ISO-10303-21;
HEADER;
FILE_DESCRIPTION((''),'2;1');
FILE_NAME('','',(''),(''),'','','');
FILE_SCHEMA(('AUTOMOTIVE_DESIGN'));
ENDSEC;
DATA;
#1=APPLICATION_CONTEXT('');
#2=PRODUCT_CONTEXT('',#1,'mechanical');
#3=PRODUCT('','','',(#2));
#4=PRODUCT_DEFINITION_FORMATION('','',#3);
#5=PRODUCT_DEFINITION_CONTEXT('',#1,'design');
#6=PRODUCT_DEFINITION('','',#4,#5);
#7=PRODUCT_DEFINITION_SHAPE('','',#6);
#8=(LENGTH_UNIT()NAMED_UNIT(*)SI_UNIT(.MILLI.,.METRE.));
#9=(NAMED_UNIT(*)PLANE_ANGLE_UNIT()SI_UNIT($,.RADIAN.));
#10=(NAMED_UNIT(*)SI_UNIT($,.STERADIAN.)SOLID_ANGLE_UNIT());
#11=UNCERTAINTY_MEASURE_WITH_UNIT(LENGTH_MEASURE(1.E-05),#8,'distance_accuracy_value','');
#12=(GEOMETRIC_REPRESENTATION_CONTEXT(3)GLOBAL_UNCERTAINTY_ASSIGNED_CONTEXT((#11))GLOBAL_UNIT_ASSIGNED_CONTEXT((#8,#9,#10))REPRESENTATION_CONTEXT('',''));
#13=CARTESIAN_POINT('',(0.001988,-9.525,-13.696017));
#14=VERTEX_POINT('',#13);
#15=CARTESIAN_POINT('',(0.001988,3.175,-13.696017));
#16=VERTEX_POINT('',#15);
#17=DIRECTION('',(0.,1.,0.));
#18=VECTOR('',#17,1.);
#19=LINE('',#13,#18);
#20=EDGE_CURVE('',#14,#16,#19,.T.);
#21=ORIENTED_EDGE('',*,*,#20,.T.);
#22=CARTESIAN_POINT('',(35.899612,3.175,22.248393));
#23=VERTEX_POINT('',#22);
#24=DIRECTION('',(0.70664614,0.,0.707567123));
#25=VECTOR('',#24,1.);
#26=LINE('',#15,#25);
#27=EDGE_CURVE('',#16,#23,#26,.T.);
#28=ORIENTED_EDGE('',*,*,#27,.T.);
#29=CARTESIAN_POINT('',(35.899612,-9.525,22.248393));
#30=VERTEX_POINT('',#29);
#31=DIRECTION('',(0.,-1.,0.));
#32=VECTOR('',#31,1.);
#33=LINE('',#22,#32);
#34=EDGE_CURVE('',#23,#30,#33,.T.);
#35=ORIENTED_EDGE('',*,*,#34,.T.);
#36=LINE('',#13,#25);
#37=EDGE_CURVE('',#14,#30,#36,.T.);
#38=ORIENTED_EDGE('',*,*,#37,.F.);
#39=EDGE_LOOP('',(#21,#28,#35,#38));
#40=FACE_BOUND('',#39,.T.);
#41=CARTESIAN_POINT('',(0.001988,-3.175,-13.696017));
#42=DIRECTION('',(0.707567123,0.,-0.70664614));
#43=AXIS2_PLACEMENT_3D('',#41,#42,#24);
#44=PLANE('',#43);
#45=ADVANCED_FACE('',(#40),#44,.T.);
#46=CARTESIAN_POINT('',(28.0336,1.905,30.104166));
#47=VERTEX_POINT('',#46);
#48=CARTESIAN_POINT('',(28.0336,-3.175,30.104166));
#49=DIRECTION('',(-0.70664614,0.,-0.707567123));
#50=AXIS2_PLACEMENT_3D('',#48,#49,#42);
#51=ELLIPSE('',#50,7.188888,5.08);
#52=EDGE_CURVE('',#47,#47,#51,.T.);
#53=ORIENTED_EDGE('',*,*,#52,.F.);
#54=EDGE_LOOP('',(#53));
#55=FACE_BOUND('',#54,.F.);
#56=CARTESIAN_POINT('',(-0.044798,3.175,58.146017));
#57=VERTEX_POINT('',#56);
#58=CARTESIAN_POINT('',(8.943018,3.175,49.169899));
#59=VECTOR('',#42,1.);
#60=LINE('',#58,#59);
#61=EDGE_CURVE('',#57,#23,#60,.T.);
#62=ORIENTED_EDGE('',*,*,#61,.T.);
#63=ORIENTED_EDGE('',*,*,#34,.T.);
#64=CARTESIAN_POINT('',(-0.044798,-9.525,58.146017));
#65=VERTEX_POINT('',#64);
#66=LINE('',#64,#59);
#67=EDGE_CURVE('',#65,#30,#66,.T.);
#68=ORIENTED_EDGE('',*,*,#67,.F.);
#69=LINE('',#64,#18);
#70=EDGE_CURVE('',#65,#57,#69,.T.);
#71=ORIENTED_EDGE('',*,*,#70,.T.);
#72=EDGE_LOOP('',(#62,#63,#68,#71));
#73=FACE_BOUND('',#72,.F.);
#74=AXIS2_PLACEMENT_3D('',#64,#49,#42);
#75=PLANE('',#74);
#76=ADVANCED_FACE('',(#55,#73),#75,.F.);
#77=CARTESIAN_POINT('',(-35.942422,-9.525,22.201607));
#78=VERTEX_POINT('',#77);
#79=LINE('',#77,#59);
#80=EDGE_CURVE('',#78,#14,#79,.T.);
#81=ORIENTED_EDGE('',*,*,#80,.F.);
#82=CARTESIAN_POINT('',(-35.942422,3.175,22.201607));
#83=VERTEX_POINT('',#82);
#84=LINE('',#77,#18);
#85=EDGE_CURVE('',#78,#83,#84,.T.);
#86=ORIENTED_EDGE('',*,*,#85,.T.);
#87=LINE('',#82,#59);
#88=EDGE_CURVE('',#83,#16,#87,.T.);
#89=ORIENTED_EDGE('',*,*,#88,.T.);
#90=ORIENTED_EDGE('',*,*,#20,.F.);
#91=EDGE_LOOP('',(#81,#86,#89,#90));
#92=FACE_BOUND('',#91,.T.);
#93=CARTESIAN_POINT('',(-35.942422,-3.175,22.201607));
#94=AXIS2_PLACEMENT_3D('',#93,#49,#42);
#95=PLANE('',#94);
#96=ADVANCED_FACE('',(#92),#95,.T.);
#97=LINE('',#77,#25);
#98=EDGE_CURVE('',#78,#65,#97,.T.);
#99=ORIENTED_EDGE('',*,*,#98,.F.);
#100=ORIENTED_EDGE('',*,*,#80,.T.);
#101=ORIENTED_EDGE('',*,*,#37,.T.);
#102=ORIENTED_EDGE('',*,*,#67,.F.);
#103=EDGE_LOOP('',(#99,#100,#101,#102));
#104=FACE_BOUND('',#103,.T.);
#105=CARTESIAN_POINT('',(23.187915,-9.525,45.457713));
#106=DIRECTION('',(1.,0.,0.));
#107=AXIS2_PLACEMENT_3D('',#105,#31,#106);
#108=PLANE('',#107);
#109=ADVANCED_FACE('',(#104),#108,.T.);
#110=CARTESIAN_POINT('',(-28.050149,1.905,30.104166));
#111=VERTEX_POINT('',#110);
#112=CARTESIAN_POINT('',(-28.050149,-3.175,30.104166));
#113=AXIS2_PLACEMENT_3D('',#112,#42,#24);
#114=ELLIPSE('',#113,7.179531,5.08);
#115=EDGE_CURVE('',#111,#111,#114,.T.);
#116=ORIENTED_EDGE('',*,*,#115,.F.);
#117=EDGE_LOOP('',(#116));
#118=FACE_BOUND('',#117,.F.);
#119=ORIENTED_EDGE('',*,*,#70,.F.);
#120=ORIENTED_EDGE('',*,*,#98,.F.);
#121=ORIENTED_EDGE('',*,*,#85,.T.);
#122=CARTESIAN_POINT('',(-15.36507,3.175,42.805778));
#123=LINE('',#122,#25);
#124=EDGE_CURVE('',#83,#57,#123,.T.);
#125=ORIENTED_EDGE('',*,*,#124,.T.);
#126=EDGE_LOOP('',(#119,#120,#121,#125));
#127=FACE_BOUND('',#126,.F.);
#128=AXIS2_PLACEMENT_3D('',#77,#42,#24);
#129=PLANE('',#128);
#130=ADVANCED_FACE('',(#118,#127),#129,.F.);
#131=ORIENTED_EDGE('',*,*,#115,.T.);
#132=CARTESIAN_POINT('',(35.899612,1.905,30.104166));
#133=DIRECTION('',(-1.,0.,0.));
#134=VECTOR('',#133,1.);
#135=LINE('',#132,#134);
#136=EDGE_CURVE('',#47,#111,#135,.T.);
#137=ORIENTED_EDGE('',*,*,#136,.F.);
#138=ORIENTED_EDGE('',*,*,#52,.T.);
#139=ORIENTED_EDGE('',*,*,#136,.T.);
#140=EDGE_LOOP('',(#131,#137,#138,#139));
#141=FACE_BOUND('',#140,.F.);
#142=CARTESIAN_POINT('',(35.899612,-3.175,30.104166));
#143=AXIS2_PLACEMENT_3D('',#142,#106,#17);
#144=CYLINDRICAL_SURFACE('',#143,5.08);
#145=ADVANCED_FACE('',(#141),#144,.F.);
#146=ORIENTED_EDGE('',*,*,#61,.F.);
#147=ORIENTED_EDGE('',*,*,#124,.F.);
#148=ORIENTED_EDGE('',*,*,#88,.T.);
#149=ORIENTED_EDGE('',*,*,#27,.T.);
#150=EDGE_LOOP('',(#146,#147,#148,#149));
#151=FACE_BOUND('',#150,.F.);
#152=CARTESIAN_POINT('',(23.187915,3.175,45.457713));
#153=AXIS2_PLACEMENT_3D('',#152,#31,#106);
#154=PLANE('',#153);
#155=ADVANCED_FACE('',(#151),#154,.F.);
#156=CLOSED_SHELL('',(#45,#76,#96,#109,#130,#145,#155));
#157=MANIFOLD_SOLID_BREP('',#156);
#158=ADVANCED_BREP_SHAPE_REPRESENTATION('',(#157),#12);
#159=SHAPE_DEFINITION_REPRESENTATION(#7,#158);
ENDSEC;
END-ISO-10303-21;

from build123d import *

# Parameters (mm, degrees)
F0_W      = 203.2
F0_H      = 44.45
F1_DEPTH  = 3.175
F3_DEPTH  = 6.35
F5_DEPTH  = 25.4
F6_DEPTH  = 25.4
F8_DEPTH  = 12.7
F9_R      = 5.08
F10_DEPTH = 76.2
F12_DEPTH = 25.4


with BuildPart() as f1:
    # F0 (on Front) → F1 (new body, symmetric)
    with BuildSketch(Plane.XZ):
        with Locations((2.1883048997, 22.225)):
            Rectangle(F0_W, F0_H)
    extrude(amount=F1_DEPTH, both=True)

    # F2 (on face) → F3 (join, symmetric)
    with BuildSketch(Plane.XZ.offset(3.175)):
        Polygon((2.2116978689, -13.6960168671), (38.1093217669, 22.2483929692), (2.1649119306, 58.1460168671), (-33.7327119674, 22.2016070308), align=None)
    extrude(amount=F3_DEPTH, both=True)


with BuildPart() as f1_1:
    # F4: moved
    add(f1.part.moved(Location((-2.20971, 0, 0))))

    # F5 (cut): a face of the model
    f5_faces = [f1_1.faces().sort_by_distance(p)[0] for p in [
        (-62.9576531363, -3.175, 22.225592552),
    ]]
    extrude(f5_faces, amount=-F5_DEPTH, mode=Mode.SUBTRACT)

    # F6 (cut): a face of the model
    f6_faces = [f1_1.faces().sort_by_distance(p)[0] for p in [
        (62.9148429358, -3.175, 22.224407448),
    ]]
    extrude(f6_faces, amount=-F6_DEPTH, mode=Mode.SUBTRACT)

    # F7 (on face) → F8 (join)
    with BuildSketch(Plane.XZ.offset(9.525)):
        Polygon((35.8996117669, 58.1460168671), (-0.0447980694, 58.1460168671), (35.8996117669, 22.2483929692), align=None)
        Polygon((-35.9424219674, 22.2016070308), (-0.0447980694, 58.1460168671), (-35.9424219674, 58.1460168671), align=None)
    extrude(amount=-F8_DEPTH)

    # F9 (on face) → F10 (cut)
    with BuildSketch(Plane.YZ.offset(35.8996117669)):
        with Locations((-3.175, 30.1041658968)):
            Circle(F9_R)
    extrude(amount=-F10_DEPTH, mode=Mode.SUBTRACT)

    # F11 (on face) → F12 (cut)
    with BuildSketch(Plane.XZ.offset(9.525)):
        Polygon((35.8996117669, 58.1460168671), (-0.0447980694, 58.1460168671), (35.8996117669, 22.2483929692), align=None)
        Polygon((-35.9424219674, 58.1460168671), (-35.9424219674, 22.2016070308), (-0.0447980694, 58.1460168671), align=None)
    extrude(amount=-F12_DEPTH, mode=Mode.SUBTRACT)


solid = f1_1.part
